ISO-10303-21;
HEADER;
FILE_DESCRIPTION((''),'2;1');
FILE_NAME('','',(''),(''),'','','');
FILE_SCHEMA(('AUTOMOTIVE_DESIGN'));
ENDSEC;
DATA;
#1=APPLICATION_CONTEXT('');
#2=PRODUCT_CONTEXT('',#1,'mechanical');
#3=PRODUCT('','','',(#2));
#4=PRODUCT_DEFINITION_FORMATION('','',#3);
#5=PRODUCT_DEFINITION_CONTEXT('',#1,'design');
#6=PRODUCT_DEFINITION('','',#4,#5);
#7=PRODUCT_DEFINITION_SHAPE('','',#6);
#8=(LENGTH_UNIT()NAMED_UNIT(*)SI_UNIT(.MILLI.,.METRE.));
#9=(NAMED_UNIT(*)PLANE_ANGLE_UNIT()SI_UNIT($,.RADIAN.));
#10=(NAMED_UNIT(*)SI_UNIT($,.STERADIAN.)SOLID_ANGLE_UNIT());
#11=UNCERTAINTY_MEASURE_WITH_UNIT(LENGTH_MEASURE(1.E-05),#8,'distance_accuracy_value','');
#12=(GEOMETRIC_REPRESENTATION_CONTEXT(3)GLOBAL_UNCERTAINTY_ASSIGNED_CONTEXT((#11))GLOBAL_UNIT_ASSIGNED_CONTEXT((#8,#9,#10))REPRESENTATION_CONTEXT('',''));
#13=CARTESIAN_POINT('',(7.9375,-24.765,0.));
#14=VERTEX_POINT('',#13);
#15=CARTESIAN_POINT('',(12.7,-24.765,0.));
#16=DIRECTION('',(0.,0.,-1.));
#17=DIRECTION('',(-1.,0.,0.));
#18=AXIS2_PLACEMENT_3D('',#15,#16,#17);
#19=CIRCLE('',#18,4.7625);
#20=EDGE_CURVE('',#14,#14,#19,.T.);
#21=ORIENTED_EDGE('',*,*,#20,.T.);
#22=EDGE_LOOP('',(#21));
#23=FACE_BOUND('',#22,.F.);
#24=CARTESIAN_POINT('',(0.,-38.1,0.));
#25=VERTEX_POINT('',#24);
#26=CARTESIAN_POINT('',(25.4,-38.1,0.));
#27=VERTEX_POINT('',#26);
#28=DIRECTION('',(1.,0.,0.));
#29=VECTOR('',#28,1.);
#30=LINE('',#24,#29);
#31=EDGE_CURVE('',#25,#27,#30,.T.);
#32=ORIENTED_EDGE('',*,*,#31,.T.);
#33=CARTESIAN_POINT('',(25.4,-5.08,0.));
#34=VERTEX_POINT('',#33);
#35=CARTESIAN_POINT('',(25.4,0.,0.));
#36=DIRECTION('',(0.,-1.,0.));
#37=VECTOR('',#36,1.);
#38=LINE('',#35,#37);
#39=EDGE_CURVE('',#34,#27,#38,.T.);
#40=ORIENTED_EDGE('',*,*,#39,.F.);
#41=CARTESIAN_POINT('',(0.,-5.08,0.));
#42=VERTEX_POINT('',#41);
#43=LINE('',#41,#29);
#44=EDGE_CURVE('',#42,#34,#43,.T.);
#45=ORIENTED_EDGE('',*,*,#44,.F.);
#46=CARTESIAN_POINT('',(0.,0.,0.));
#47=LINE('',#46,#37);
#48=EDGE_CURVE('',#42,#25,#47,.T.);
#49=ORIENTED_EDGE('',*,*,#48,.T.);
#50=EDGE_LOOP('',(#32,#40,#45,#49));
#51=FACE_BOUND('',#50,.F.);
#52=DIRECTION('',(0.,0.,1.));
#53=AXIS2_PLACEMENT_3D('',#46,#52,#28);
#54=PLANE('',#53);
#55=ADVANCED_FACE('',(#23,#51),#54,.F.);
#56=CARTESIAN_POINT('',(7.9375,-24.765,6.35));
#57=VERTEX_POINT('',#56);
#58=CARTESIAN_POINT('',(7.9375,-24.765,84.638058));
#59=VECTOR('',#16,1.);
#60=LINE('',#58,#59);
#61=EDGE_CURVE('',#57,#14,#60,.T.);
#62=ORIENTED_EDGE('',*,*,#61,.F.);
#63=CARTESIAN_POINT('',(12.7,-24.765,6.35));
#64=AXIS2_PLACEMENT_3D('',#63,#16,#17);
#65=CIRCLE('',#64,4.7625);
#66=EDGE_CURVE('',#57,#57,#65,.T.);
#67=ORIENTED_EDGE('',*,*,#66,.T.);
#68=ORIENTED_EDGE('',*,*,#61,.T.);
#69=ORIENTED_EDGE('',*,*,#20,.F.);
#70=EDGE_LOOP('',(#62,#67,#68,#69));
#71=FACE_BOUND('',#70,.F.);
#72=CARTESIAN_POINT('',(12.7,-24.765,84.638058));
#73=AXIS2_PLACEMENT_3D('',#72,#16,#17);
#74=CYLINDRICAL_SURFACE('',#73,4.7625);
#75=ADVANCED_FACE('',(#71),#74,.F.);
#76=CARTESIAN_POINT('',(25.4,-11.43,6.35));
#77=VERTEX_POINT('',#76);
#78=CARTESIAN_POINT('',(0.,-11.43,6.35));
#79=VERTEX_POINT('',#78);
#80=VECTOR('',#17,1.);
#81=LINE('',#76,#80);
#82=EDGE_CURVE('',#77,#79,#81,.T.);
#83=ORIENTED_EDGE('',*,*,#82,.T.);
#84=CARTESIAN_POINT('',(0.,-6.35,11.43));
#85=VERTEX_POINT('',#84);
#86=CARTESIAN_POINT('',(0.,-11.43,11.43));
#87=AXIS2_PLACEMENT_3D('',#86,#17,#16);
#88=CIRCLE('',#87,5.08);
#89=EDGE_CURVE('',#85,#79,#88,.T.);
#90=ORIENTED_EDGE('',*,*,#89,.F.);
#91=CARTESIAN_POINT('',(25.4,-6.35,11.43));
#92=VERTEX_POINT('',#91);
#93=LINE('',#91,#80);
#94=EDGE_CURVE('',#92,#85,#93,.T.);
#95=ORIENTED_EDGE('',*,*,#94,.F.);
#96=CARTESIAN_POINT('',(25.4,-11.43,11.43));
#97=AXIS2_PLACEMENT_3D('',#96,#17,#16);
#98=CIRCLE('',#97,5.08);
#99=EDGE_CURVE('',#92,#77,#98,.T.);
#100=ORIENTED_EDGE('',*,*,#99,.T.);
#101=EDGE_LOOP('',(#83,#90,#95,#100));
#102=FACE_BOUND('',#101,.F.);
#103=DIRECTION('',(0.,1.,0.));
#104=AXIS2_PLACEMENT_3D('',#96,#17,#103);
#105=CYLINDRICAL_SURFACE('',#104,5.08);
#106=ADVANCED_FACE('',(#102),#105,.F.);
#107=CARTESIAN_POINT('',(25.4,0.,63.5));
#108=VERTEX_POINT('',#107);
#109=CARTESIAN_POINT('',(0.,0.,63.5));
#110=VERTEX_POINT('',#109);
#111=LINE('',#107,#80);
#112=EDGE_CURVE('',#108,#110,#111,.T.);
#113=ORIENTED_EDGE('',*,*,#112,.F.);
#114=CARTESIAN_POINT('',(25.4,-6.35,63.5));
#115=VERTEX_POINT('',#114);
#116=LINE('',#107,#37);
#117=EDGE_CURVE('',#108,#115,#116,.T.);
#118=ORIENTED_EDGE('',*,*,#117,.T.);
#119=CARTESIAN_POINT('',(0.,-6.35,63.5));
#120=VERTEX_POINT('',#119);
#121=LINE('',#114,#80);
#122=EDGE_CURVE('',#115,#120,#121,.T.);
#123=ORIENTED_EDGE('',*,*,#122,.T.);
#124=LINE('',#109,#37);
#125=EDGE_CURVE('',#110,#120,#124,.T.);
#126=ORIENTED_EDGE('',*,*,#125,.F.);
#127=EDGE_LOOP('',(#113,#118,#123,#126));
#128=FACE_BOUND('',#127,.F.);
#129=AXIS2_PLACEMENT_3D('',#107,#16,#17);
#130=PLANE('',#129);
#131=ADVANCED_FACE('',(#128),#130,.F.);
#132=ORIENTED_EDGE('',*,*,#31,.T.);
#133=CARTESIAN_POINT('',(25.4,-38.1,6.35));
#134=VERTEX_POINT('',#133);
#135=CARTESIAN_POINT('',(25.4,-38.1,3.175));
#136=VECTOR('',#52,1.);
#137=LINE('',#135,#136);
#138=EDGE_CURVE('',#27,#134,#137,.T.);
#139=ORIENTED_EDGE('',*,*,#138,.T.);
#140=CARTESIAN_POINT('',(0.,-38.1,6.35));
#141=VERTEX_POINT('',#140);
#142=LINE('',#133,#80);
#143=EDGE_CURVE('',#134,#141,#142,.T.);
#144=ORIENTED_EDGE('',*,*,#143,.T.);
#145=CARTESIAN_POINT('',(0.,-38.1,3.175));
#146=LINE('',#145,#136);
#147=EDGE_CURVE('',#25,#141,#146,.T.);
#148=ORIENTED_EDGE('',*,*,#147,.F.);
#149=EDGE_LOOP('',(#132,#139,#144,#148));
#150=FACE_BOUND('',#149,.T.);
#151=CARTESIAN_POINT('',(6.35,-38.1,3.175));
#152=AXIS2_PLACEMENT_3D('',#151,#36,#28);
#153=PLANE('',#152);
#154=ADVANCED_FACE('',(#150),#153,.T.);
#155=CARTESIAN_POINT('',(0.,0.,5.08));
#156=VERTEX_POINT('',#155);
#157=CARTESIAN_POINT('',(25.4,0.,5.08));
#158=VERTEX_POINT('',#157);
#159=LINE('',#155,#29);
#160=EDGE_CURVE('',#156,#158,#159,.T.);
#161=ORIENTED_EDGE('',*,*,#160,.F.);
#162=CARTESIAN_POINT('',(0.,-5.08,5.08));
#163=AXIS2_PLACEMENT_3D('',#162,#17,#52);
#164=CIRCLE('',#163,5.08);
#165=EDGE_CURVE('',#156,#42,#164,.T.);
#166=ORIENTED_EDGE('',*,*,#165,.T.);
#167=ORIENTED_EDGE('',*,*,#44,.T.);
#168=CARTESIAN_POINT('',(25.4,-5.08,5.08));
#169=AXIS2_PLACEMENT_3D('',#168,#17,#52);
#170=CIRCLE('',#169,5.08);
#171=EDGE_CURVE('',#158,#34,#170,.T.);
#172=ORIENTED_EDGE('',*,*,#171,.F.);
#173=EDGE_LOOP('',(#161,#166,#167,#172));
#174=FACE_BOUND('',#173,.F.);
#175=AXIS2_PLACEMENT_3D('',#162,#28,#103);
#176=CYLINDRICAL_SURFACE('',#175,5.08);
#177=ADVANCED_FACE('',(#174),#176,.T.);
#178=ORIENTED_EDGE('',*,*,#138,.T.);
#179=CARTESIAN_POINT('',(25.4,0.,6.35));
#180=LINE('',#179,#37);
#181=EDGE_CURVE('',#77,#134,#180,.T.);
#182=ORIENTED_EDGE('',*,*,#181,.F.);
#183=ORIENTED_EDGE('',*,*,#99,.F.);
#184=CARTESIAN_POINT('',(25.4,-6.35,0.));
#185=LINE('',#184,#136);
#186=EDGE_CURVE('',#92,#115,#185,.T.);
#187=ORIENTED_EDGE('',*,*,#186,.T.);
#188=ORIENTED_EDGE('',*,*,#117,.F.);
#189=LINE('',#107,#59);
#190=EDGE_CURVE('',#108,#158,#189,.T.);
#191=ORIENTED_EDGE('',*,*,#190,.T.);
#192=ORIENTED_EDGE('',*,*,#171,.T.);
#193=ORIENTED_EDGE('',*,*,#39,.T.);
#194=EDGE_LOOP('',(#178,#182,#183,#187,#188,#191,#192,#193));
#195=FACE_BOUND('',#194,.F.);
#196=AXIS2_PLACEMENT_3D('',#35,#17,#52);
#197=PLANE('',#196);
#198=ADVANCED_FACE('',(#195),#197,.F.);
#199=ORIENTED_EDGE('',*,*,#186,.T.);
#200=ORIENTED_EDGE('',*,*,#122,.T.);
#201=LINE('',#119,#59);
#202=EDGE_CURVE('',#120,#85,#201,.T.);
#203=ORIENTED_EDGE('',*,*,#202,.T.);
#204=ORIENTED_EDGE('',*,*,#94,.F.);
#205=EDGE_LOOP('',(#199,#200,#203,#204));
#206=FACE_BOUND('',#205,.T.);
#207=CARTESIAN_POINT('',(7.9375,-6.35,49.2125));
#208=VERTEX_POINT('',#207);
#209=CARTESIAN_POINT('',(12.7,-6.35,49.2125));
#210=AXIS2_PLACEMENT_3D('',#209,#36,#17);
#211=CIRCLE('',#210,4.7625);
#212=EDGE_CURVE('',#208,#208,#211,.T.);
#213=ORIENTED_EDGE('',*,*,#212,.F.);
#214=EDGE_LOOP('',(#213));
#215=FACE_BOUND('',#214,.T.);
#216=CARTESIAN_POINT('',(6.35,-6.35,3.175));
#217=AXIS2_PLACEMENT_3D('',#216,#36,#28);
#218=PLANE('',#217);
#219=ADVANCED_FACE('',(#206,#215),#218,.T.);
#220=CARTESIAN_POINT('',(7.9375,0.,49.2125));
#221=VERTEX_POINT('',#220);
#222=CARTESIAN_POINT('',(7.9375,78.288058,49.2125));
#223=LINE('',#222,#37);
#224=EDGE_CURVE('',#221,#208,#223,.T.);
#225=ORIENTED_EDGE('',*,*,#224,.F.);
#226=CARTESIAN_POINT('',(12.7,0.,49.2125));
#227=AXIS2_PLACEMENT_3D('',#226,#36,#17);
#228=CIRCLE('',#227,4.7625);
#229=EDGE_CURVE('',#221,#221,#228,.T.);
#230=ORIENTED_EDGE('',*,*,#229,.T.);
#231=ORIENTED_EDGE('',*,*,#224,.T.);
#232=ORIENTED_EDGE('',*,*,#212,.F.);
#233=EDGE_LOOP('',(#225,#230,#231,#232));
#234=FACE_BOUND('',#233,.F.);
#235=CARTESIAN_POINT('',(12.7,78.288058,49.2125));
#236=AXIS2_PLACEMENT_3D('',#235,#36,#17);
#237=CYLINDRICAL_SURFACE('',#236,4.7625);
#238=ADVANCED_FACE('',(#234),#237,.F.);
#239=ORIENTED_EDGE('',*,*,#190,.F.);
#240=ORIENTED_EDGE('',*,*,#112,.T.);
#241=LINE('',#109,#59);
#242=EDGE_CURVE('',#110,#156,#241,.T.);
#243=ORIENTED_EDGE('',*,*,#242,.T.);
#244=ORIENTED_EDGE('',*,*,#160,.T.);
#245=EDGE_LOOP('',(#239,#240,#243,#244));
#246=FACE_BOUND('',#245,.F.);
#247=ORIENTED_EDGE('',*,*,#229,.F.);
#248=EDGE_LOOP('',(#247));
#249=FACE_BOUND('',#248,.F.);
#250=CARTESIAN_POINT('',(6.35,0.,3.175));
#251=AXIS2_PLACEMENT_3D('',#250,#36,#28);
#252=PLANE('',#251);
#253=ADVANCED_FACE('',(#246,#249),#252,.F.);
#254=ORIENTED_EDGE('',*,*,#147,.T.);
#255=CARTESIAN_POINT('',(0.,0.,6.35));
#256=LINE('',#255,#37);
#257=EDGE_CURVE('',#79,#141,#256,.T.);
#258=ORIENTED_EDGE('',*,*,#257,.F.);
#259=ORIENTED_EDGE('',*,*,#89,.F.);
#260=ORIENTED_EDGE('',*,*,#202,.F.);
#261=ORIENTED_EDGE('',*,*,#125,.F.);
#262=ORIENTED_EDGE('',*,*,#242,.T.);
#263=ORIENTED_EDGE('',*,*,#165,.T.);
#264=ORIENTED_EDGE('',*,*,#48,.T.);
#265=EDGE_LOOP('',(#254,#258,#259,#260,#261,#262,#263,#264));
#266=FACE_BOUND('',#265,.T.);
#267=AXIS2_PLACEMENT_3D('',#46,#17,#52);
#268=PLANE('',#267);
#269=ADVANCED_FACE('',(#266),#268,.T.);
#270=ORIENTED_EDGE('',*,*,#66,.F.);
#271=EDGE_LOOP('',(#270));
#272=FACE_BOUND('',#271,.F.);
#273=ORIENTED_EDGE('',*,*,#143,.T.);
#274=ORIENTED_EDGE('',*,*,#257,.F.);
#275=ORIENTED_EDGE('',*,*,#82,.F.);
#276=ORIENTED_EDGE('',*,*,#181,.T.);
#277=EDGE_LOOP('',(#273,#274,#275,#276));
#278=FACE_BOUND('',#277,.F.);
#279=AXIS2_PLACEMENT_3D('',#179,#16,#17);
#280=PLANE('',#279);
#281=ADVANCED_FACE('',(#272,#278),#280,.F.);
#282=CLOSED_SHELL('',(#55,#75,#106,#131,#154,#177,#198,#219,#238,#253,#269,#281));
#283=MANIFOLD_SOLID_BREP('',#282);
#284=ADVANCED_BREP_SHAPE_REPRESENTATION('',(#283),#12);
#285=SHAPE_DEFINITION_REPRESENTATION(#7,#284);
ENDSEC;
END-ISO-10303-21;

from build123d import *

# Parameters (mm, degrees)
F0_W     = 12.7
F0_H     = 6.35
F1_DEPTH = 38.1
F0_H_2   = 57.15
F2_DEPTH = 6.35
F3_R     = 5.08
F5_D     = 9.525
F6_D     = 9.525


# Not quite as in the source:
# - a length typed as a fraction of an inch, garbled in the dataset ("3 / 203.2 mm" for 3/8 in), is restored


with BuildPart() as f1:
    # F0 (on Front) → F1 (new body)
    with BuildSketch(Plane.XZ):
        with Locations((6.35, 3.175)):
            Rectangle(F0_W, F0_H)
        with Locations((19.05, 3.175)):
            Rectangle(F0_W, F0_H)
    extrude(amount=F1_DEPTH)

    # F0 (on Front) → F2 (join)
    with BuildSketch(Plane.XZ):
        with Locations((6.35, 3.175)):
            Rectangle(F0_W, F0_H)
        with Locations((19.05, 3.175)):
            Rectangle(F0_W, F0_H)
        with Locations((6.35, 34.925)):
            Rectangle(F0_W, F0_H_2)
        with Locations((19.05, 34.925)):
            Rectangle(F0_W, F0_H_2)
    extrude(amount=F2_DEPTH)

    # F3
    f3_edges = [f1.edges().sort_by_distance(p)[0] for p in [
        (12.7, -6.35, 6.35),
        (12.7, 0, 0),
    ]]
    fillet(f3_edges, radius=F3_R)

    # F5 (through all)
    with Locations(Plane.XY.offset(6.35)):
        with Locations((12.7, -24.765)):
            Hole(F5_D / 2)

    # F6 (through all)
    with Locations(Plane(origin=(0, 0, 0), x_dir=(1, 0, 0), z_dir=(0, 1, 0))):
        with Locations((12.7, -49.2125)):
            Hole(F6_D / 2)


solid = f1.part
